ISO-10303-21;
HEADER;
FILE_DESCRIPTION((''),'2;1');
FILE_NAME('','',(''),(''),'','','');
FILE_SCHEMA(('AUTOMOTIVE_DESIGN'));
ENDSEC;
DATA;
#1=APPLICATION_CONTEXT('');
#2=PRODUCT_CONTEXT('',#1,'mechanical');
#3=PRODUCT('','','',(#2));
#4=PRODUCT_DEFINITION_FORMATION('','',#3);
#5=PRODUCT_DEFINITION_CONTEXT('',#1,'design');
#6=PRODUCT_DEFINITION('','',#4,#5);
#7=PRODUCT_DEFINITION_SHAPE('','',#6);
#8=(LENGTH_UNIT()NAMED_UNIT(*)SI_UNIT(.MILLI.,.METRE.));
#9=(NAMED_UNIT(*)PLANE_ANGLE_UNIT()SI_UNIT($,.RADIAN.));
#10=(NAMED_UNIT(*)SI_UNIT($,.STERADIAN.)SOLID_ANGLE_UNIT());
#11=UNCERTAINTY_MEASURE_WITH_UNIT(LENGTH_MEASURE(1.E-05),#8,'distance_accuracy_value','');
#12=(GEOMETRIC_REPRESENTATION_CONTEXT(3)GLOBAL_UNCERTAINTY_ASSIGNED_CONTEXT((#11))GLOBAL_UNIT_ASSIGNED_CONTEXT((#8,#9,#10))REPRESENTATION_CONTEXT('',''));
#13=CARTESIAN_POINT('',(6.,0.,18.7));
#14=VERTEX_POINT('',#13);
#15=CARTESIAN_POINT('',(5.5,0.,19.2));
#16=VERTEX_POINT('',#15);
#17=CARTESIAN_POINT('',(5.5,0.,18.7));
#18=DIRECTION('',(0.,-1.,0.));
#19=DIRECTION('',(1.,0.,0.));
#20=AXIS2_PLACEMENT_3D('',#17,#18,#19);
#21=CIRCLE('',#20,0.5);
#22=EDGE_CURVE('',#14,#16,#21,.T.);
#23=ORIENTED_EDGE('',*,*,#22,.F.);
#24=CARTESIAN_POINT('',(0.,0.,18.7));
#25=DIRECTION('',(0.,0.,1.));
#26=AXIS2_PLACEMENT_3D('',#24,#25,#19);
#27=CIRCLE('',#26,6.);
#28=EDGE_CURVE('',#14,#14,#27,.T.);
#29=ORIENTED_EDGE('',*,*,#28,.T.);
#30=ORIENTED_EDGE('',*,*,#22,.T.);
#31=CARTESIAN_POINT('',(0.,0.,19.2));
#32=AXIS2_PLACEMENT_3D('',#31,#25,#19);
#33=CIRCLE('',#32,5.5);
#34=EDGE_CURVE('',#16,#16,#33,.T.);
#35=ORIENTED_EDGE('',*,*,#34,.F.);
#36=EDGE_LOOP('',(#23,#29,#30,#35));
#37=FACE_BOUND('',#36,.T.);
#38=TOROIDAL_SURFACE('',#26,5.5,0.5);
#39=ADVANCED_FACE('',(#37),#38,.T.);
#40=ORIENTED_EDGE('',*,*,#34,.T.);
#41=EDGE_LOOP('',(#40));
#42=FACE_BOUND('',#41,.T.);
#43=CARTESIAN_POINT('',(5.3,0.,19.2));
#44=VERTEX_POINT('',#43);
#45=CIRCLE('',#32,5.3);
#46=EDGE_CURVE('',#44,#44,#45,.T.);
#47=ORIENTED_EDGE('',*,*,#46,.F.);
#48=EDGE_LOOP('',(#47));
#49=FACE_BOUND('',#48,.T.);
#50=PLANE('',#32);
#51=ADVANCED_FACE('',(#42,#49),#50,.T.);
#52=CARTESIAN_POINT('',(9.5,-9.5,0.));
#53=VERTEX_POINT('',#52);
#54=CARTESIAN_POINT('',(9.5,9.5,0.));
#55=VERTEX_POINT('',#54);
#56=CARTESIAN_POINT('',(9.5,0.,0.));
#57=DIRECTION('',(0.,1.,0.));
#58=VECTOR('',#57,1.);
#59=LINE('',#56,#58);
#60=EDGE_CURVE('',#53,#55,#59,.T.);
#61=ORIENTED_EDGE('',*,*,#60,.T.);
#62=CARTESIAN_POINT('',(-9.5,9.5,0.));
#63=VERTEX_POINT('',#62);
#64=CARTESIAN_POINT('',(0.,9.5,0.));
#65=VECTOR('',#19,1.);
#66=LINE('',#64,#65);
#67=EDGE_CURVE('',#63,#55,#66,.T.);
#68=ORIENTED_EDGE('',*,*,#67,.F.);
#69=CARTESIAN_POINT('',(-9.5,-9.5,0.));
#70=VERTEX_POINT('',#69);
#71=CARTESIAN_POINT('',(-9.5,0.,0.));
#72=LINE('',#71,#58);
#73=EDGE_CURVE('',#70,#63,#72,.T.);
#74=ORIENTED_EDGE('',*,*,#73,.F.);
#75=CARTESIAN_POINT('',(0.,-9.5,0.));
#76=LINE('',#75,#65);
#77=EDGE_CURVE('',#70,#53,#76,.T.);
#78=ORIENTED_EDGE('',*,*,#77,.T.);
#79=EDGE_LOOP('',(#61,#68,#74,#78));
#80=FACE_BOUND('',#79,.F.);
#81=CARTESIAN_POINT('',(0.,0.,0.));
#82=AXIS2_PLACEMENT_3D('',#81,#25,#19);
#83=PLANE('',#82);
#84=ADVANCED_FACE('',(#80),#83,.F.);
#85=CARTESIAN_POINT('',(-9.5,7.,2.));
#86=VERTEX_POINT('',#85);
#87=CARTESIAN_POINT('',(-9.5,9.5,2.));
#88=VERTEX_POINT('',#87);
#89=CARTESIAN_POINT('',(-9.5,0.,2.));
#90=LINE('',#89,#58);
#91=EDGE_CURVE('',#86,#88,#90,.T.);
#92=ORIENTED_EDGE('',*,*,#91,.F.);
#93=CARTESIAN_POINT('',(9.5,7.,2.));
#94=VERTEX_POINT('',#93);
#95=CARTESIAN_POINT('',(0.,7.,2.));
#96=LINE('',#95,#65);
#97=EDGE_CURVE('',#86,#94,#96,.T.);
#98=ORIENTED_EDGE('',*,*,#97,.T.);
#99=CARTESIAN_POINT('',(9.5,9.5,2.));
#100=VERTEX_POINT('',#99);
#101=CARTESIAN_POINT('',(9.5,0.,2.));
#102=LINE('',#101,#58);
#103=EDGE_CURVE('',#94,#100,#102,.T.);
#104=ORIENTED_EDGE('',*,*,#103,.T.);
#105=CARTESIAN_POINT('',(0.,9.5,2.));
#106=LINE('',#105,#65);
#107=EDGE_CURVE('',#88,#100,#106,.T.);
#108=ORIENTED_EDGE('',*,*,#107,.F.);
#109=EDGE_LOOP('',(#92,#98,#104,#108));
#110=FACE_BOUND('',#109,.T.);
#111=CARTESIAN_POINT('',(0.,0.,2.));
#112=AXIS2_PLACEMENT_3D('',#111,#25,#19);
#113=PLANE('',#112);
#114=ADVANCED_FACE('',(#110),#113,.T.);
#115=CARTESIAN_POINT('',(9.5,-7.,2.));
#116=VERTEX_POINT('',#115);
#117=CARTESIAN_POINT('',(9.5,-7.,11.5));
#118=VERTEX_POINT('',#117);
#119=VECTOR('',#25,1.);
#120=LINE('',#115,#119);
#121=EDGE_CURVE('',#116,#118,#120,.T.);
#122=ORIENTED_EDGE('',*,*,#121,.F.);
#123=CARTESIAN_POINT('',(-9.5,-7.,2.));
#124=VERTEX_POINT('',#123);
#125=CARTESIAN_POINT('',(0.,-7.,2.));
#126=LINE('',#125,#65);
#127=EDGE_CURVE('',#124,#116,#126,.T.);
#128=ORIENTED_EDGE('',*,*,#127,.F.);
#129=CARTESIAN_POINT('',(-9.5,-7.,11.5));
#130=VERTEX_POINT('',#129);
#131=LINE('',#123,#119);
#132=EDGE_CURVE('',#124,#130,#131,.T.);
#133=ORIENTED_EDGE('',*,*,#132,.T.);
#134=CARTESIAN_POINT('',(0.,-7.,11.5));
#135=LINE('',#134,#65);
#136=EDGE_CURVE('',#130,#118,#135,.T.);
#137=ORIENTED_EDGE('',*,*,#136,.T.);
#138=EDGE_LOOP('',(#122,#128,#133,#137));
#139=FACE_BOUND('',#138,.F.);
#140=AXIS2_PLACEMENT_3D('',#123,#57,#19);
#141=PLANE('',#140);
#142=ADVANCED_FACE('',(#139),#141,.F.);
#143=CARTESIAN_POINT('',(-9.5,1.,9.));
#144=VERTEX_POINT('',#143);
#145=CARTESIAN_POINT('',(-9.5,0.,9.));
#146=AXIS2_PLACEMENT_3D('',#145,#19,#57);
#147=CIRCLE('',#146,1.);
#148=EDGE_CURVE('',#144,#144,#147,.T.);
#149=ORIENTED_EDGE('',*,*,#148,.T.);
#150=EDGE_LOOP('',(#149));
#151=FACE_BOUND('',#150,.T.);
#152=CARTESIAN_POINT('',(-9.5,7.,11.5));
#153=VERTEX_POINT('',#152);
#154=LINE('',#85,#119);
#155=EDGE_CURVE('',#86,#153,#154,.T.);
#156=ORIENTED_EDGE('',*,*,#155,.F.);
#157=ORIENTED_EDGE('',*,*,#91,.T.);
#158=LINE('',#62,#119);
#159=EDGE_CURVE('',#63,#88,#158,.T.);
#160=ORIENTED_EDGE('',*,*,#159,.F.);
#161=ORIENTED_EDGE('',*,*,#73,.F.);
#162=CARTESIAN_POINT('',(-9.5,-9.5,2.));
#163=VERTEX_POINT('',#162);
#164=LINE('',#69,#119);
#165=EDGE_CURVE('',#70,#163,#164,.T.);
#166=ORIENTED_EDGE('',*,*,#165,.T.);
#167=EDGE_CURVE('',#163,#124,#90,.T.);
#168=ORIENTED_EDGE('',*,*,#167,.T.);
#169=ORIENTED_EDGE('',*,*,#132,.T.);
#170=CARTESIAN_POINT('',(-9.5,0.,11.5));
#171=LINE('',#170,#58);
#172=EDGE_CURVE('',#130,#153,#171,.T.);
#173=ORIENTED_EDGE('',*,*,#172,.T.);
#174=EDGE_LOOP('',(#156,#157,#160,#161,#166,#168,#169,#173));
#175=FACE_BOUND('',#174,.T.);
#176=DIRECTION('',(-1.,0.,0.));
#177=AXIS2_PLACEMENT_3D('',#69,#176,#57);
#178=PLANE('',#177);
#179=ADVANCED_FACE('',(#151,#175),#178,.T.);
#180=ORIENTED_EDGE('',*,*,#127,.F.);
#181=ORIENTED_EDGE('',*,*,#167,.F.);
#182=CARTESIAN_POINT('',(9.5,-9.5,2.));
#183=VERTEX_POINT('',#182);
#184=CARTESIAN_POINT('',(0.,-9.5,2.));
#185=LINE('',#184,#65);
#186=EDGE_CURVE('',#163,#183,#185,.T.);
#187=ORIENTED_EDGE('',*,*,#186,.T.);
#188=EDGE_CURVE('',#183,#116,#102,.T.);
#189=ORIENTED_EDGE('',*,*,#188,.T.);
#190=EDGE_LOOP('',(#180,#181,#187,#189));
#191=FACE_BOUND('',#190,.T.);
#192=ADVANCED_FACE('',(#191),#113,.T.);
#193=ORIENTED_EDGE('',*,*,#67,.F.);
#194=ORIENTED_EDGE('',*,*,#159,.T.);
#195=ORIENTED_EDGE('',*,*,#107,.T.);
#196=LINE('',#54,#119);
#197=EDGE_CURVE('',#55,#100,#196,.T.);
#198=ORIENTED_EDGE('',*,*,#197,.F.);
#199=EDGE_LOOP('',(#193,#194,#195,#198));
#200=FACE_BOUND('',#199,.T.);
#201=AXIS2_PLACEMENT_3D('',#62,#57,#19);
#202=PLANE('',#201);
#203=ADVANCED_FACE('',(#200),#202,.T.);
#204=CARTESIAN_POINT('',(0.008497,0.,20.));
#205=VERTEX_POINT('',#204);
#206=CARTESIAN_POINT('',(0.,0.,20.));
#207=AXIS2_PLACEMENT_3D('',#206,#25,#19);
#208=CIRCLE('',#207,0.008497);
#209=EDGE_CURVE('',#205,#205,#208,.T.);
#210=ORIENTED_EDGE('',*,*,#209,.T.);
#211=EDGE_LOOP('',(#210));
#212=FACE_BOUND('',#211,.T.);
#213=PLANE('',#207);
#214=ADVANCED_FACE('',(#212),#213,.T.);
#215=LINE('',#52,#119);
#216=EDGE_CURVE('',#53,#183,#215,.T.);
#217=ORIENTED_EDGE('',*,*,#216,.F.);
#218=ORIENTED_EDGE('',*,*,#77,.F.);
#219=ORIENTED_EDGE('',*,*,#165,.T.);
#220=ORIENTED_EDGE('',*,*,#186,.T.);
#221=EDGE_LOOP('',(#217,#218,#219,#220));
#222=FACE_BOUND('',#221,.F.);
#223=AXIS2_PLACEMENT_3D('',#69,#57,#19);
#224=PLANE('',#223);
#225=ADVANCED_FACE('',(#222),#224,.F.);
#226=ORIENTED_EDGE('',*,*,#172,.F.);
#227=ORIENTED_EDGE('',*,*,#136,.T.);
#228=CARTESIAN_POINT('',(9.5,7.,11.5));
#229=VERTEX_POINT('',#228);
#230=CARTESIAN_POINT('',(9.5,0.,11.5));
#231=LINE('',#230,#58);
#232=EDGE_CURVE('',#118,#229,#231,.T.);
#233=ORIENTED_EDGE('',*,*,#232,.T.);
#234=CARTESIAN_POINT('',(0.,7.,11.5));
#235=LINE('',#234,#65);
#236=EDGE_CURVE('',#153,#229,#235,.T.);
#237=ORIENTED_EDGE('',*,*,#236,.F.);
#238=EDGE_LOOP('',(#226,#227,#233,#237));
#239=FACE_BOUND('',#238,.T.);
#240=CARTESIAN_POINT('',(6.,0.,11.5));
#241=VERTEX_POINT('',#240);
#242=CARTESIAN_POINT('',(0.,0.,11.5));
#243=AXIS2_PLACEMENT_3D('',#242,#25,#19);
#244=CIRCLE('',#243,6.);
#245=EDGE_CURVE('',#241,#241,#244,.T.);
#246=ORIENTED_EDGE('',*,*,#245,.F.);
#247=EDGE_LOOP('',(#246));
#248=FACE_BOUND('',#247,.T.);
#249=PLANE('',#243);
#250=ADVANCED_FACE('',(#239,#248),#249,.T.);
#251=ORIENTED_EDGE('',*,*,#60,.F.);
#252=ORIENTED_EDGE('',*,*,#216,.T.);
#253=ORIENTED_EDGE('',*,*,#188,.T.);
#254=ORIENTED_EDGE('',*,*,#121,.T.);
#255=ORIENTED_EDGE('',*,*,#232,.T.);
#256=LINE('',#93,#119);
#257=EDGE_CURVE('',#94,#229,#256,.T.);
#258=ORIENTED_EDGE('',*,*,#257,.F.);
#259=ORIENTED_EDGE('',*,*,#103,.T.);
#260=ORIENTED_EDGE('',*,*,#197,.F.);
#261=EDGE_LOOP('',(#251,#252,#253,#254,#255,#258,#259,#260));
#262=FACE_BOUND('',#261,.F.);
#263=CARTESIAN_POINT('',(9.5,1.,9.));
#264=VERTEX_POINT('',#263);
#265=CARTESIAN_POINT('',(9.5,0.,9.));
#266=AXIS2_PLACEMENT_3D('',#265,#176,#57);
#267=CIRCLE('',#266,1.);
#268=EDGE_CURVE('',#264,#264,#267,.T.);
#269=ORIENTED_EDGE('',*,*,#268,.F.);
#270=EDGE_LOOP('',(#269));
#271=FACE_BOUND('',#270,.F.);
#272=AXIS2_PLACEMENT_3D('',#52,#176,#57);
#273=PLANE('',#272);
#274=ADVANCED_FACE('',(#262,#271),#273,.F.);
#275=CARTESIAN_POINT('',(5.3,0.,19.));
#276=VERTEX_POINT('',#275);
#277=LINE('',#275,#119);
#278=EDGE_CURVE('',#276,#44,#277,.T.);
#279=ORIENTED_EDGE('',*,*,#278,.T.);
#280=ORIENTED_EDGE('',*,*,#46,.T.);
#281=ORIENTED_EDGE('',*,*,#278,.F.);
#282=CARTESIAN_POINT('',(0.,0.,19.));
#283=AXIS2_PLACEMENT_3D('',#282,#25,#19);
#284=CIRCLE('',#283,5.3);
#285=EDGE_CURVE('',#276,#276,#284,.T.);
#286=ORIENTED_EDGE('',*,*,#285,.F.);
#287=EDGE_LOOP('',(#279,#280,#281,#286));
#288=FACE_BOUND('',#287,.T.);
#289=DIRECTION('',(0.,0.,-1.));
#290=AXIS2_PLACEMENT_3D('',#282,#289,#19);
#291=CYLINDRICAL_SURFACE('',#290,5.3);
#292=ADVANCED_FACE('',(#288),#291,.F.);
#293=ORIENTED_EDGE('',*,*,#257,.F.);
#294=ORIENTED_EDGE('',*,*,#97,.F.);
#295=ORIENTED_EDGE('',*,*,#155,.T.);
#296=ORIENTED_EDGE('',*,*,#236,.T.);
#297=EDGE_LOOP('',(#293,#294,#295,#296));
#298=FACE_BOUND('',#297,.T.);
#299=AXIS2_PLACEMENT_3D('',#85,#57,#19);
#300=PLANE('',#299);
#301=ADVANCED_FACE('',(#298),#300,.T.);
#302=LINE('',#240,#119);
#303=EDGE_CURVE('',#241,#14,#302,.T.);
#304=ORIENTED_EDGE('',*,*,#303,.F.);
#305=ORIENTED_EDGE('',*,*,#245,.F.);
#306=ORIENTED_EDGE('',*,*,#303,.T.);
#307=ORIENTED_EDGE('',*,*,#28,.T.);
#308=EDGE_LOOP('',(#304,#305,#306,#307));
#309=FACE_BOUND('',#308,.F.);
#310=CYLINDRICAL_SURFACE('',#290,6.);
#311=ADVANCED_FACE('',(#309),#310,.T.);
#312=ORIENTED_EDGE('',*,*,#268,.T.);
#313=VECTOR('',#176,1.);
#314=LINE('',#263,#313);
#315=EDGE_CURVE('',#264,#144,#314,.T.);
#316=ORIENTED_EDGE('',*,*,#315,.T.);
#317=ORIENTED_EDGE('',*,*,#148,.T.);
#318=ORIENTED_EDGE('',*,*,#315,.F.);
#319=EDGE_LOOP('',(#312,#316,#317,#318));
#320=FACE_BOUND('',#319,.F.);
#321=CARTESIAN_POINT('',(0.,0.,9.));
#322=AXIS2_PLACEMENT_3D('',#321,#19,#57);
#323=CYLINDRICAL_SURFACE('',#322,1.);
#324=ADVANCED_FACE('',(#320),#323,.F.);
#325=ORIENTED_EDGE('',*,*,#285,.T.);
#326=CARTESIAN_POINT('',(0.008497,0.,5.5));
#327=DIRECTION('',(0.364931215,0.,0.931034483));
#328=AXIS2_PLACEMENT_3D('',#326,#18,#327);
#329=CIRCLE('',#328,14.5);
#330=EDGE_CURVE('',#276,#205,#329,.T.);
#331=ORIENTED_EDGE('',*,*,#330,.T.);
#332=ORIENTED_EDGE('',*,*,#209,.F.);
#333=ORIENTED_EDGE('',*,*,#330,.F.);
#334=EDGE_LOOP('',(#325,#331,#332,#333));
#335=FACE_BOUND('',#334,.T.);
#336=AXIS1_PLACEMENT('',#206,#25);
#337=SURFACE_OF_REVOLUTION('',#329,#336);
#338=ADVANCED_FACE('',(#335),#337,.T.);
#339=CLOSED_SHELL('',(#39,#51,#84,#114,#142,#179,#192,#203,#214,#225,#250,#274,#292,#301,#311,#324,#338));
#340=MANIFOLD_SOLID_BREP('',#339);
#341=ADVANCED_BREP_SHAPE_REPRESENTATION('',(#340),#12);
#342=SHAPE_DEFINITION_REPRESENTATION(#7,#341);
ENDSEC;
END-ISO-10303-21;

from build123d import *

# Parameters (mm, degrees)
F0_W          = 19
F0_H          = 19
F3_DEPTH      = 2
F4_START      = 2
F2_W          = 19
F2_H          = 14
F4_DEPTH      = 9.5
F5_START      = 11.5
F1_R          = 6
F5_DEPTH      = 7.5
F6_R          = 1
F7_DEPTH      = 25
F7_DEPTH_BACK = 25
F8_R          = 5.2999998443
F9_DEPTH      = 1
F11_DEPTH     = 0.2
F12_R         = 0.5


# Not quite as in the source:
# - a fillet or chamfer that OpenCascade refuses, or shapes differently, is made with other operations: its cross-section is extruded or revolved along the edge and cut away or added


with BuildPart() as f3:
    # F0 (on Top) → F3 (new body)
    with BuildSketch(Plane.XY):
        Rectangle(F0_W, F0_H)
    extrude(amount=F3_DEPTH)

    # F2 (on Top) → F4 (join)
    with BuildSketch(Plane.XY.offset(F4_START)):
        Rectangle(F2_W, F2_H)
    extrude(amount=F4_DEPTH)

    # F1 (on Top) → F5 (join)
    with BuildSketch(Plane.XY.offset(F5_START)):
        Circle(F1_R)
    extrude(amount=F5_DEPTH)

    # F6 (on Right) → F7 (cut, two sides)
    with BuildSketch(Plane.YZ) as f7_sk:
        with Locations((0, 9)):
            Circle(F6_R)
    extrude(amount=-F7_DEPTH, mode=Mode.SUBTRACT)
    extrude(f7_sk.sketch, amount=F7_DEPTH_BACK, mode=Mode.SUBTRACT)

    # F8 (on face) → F9 (join)
    with BuildSketch(Plane.XY.offset(19)):
        Circle(F8_R)
    extrude(amount=F9_DEPTH)

    # F10: fillet of radius 14.5 on 1 edges, made by hand

    # F10_s1 → F10_t2 (revolve, cut)
    with BuildSketch(Plane.XZ):
        with BuildLine():
            ThreePointArc((5.2999998443, 19), (2.7010796257, 19.7478068488), (0.0084972222, 20))
            Line((0.0084972222, 20), (5.2999998443, 20))
            Line((5.2999998443, 20), (5.2999998443, 19))
        make_face()
    revolve(axis=Axis((0, 0, 20), (0, 0, 1)), mode=Mode.SUBTRACT)

    # F11 (add): a face of the model
    f11_faces = [f3.faces().sort_by_distance(p)[0] for p in [
        (-5.8302943725, 0, 19),
    ]]
    extrude(f11_faces, amount=F11_DEPTH)

    # F12
    f12_edges = [f3.edges().sort_by_distance(p)[0] for p in [
        (-6, 0, 19.2),
    ]]
    fillet(f12_edges, radius=F12_R)


solid = f3.part
